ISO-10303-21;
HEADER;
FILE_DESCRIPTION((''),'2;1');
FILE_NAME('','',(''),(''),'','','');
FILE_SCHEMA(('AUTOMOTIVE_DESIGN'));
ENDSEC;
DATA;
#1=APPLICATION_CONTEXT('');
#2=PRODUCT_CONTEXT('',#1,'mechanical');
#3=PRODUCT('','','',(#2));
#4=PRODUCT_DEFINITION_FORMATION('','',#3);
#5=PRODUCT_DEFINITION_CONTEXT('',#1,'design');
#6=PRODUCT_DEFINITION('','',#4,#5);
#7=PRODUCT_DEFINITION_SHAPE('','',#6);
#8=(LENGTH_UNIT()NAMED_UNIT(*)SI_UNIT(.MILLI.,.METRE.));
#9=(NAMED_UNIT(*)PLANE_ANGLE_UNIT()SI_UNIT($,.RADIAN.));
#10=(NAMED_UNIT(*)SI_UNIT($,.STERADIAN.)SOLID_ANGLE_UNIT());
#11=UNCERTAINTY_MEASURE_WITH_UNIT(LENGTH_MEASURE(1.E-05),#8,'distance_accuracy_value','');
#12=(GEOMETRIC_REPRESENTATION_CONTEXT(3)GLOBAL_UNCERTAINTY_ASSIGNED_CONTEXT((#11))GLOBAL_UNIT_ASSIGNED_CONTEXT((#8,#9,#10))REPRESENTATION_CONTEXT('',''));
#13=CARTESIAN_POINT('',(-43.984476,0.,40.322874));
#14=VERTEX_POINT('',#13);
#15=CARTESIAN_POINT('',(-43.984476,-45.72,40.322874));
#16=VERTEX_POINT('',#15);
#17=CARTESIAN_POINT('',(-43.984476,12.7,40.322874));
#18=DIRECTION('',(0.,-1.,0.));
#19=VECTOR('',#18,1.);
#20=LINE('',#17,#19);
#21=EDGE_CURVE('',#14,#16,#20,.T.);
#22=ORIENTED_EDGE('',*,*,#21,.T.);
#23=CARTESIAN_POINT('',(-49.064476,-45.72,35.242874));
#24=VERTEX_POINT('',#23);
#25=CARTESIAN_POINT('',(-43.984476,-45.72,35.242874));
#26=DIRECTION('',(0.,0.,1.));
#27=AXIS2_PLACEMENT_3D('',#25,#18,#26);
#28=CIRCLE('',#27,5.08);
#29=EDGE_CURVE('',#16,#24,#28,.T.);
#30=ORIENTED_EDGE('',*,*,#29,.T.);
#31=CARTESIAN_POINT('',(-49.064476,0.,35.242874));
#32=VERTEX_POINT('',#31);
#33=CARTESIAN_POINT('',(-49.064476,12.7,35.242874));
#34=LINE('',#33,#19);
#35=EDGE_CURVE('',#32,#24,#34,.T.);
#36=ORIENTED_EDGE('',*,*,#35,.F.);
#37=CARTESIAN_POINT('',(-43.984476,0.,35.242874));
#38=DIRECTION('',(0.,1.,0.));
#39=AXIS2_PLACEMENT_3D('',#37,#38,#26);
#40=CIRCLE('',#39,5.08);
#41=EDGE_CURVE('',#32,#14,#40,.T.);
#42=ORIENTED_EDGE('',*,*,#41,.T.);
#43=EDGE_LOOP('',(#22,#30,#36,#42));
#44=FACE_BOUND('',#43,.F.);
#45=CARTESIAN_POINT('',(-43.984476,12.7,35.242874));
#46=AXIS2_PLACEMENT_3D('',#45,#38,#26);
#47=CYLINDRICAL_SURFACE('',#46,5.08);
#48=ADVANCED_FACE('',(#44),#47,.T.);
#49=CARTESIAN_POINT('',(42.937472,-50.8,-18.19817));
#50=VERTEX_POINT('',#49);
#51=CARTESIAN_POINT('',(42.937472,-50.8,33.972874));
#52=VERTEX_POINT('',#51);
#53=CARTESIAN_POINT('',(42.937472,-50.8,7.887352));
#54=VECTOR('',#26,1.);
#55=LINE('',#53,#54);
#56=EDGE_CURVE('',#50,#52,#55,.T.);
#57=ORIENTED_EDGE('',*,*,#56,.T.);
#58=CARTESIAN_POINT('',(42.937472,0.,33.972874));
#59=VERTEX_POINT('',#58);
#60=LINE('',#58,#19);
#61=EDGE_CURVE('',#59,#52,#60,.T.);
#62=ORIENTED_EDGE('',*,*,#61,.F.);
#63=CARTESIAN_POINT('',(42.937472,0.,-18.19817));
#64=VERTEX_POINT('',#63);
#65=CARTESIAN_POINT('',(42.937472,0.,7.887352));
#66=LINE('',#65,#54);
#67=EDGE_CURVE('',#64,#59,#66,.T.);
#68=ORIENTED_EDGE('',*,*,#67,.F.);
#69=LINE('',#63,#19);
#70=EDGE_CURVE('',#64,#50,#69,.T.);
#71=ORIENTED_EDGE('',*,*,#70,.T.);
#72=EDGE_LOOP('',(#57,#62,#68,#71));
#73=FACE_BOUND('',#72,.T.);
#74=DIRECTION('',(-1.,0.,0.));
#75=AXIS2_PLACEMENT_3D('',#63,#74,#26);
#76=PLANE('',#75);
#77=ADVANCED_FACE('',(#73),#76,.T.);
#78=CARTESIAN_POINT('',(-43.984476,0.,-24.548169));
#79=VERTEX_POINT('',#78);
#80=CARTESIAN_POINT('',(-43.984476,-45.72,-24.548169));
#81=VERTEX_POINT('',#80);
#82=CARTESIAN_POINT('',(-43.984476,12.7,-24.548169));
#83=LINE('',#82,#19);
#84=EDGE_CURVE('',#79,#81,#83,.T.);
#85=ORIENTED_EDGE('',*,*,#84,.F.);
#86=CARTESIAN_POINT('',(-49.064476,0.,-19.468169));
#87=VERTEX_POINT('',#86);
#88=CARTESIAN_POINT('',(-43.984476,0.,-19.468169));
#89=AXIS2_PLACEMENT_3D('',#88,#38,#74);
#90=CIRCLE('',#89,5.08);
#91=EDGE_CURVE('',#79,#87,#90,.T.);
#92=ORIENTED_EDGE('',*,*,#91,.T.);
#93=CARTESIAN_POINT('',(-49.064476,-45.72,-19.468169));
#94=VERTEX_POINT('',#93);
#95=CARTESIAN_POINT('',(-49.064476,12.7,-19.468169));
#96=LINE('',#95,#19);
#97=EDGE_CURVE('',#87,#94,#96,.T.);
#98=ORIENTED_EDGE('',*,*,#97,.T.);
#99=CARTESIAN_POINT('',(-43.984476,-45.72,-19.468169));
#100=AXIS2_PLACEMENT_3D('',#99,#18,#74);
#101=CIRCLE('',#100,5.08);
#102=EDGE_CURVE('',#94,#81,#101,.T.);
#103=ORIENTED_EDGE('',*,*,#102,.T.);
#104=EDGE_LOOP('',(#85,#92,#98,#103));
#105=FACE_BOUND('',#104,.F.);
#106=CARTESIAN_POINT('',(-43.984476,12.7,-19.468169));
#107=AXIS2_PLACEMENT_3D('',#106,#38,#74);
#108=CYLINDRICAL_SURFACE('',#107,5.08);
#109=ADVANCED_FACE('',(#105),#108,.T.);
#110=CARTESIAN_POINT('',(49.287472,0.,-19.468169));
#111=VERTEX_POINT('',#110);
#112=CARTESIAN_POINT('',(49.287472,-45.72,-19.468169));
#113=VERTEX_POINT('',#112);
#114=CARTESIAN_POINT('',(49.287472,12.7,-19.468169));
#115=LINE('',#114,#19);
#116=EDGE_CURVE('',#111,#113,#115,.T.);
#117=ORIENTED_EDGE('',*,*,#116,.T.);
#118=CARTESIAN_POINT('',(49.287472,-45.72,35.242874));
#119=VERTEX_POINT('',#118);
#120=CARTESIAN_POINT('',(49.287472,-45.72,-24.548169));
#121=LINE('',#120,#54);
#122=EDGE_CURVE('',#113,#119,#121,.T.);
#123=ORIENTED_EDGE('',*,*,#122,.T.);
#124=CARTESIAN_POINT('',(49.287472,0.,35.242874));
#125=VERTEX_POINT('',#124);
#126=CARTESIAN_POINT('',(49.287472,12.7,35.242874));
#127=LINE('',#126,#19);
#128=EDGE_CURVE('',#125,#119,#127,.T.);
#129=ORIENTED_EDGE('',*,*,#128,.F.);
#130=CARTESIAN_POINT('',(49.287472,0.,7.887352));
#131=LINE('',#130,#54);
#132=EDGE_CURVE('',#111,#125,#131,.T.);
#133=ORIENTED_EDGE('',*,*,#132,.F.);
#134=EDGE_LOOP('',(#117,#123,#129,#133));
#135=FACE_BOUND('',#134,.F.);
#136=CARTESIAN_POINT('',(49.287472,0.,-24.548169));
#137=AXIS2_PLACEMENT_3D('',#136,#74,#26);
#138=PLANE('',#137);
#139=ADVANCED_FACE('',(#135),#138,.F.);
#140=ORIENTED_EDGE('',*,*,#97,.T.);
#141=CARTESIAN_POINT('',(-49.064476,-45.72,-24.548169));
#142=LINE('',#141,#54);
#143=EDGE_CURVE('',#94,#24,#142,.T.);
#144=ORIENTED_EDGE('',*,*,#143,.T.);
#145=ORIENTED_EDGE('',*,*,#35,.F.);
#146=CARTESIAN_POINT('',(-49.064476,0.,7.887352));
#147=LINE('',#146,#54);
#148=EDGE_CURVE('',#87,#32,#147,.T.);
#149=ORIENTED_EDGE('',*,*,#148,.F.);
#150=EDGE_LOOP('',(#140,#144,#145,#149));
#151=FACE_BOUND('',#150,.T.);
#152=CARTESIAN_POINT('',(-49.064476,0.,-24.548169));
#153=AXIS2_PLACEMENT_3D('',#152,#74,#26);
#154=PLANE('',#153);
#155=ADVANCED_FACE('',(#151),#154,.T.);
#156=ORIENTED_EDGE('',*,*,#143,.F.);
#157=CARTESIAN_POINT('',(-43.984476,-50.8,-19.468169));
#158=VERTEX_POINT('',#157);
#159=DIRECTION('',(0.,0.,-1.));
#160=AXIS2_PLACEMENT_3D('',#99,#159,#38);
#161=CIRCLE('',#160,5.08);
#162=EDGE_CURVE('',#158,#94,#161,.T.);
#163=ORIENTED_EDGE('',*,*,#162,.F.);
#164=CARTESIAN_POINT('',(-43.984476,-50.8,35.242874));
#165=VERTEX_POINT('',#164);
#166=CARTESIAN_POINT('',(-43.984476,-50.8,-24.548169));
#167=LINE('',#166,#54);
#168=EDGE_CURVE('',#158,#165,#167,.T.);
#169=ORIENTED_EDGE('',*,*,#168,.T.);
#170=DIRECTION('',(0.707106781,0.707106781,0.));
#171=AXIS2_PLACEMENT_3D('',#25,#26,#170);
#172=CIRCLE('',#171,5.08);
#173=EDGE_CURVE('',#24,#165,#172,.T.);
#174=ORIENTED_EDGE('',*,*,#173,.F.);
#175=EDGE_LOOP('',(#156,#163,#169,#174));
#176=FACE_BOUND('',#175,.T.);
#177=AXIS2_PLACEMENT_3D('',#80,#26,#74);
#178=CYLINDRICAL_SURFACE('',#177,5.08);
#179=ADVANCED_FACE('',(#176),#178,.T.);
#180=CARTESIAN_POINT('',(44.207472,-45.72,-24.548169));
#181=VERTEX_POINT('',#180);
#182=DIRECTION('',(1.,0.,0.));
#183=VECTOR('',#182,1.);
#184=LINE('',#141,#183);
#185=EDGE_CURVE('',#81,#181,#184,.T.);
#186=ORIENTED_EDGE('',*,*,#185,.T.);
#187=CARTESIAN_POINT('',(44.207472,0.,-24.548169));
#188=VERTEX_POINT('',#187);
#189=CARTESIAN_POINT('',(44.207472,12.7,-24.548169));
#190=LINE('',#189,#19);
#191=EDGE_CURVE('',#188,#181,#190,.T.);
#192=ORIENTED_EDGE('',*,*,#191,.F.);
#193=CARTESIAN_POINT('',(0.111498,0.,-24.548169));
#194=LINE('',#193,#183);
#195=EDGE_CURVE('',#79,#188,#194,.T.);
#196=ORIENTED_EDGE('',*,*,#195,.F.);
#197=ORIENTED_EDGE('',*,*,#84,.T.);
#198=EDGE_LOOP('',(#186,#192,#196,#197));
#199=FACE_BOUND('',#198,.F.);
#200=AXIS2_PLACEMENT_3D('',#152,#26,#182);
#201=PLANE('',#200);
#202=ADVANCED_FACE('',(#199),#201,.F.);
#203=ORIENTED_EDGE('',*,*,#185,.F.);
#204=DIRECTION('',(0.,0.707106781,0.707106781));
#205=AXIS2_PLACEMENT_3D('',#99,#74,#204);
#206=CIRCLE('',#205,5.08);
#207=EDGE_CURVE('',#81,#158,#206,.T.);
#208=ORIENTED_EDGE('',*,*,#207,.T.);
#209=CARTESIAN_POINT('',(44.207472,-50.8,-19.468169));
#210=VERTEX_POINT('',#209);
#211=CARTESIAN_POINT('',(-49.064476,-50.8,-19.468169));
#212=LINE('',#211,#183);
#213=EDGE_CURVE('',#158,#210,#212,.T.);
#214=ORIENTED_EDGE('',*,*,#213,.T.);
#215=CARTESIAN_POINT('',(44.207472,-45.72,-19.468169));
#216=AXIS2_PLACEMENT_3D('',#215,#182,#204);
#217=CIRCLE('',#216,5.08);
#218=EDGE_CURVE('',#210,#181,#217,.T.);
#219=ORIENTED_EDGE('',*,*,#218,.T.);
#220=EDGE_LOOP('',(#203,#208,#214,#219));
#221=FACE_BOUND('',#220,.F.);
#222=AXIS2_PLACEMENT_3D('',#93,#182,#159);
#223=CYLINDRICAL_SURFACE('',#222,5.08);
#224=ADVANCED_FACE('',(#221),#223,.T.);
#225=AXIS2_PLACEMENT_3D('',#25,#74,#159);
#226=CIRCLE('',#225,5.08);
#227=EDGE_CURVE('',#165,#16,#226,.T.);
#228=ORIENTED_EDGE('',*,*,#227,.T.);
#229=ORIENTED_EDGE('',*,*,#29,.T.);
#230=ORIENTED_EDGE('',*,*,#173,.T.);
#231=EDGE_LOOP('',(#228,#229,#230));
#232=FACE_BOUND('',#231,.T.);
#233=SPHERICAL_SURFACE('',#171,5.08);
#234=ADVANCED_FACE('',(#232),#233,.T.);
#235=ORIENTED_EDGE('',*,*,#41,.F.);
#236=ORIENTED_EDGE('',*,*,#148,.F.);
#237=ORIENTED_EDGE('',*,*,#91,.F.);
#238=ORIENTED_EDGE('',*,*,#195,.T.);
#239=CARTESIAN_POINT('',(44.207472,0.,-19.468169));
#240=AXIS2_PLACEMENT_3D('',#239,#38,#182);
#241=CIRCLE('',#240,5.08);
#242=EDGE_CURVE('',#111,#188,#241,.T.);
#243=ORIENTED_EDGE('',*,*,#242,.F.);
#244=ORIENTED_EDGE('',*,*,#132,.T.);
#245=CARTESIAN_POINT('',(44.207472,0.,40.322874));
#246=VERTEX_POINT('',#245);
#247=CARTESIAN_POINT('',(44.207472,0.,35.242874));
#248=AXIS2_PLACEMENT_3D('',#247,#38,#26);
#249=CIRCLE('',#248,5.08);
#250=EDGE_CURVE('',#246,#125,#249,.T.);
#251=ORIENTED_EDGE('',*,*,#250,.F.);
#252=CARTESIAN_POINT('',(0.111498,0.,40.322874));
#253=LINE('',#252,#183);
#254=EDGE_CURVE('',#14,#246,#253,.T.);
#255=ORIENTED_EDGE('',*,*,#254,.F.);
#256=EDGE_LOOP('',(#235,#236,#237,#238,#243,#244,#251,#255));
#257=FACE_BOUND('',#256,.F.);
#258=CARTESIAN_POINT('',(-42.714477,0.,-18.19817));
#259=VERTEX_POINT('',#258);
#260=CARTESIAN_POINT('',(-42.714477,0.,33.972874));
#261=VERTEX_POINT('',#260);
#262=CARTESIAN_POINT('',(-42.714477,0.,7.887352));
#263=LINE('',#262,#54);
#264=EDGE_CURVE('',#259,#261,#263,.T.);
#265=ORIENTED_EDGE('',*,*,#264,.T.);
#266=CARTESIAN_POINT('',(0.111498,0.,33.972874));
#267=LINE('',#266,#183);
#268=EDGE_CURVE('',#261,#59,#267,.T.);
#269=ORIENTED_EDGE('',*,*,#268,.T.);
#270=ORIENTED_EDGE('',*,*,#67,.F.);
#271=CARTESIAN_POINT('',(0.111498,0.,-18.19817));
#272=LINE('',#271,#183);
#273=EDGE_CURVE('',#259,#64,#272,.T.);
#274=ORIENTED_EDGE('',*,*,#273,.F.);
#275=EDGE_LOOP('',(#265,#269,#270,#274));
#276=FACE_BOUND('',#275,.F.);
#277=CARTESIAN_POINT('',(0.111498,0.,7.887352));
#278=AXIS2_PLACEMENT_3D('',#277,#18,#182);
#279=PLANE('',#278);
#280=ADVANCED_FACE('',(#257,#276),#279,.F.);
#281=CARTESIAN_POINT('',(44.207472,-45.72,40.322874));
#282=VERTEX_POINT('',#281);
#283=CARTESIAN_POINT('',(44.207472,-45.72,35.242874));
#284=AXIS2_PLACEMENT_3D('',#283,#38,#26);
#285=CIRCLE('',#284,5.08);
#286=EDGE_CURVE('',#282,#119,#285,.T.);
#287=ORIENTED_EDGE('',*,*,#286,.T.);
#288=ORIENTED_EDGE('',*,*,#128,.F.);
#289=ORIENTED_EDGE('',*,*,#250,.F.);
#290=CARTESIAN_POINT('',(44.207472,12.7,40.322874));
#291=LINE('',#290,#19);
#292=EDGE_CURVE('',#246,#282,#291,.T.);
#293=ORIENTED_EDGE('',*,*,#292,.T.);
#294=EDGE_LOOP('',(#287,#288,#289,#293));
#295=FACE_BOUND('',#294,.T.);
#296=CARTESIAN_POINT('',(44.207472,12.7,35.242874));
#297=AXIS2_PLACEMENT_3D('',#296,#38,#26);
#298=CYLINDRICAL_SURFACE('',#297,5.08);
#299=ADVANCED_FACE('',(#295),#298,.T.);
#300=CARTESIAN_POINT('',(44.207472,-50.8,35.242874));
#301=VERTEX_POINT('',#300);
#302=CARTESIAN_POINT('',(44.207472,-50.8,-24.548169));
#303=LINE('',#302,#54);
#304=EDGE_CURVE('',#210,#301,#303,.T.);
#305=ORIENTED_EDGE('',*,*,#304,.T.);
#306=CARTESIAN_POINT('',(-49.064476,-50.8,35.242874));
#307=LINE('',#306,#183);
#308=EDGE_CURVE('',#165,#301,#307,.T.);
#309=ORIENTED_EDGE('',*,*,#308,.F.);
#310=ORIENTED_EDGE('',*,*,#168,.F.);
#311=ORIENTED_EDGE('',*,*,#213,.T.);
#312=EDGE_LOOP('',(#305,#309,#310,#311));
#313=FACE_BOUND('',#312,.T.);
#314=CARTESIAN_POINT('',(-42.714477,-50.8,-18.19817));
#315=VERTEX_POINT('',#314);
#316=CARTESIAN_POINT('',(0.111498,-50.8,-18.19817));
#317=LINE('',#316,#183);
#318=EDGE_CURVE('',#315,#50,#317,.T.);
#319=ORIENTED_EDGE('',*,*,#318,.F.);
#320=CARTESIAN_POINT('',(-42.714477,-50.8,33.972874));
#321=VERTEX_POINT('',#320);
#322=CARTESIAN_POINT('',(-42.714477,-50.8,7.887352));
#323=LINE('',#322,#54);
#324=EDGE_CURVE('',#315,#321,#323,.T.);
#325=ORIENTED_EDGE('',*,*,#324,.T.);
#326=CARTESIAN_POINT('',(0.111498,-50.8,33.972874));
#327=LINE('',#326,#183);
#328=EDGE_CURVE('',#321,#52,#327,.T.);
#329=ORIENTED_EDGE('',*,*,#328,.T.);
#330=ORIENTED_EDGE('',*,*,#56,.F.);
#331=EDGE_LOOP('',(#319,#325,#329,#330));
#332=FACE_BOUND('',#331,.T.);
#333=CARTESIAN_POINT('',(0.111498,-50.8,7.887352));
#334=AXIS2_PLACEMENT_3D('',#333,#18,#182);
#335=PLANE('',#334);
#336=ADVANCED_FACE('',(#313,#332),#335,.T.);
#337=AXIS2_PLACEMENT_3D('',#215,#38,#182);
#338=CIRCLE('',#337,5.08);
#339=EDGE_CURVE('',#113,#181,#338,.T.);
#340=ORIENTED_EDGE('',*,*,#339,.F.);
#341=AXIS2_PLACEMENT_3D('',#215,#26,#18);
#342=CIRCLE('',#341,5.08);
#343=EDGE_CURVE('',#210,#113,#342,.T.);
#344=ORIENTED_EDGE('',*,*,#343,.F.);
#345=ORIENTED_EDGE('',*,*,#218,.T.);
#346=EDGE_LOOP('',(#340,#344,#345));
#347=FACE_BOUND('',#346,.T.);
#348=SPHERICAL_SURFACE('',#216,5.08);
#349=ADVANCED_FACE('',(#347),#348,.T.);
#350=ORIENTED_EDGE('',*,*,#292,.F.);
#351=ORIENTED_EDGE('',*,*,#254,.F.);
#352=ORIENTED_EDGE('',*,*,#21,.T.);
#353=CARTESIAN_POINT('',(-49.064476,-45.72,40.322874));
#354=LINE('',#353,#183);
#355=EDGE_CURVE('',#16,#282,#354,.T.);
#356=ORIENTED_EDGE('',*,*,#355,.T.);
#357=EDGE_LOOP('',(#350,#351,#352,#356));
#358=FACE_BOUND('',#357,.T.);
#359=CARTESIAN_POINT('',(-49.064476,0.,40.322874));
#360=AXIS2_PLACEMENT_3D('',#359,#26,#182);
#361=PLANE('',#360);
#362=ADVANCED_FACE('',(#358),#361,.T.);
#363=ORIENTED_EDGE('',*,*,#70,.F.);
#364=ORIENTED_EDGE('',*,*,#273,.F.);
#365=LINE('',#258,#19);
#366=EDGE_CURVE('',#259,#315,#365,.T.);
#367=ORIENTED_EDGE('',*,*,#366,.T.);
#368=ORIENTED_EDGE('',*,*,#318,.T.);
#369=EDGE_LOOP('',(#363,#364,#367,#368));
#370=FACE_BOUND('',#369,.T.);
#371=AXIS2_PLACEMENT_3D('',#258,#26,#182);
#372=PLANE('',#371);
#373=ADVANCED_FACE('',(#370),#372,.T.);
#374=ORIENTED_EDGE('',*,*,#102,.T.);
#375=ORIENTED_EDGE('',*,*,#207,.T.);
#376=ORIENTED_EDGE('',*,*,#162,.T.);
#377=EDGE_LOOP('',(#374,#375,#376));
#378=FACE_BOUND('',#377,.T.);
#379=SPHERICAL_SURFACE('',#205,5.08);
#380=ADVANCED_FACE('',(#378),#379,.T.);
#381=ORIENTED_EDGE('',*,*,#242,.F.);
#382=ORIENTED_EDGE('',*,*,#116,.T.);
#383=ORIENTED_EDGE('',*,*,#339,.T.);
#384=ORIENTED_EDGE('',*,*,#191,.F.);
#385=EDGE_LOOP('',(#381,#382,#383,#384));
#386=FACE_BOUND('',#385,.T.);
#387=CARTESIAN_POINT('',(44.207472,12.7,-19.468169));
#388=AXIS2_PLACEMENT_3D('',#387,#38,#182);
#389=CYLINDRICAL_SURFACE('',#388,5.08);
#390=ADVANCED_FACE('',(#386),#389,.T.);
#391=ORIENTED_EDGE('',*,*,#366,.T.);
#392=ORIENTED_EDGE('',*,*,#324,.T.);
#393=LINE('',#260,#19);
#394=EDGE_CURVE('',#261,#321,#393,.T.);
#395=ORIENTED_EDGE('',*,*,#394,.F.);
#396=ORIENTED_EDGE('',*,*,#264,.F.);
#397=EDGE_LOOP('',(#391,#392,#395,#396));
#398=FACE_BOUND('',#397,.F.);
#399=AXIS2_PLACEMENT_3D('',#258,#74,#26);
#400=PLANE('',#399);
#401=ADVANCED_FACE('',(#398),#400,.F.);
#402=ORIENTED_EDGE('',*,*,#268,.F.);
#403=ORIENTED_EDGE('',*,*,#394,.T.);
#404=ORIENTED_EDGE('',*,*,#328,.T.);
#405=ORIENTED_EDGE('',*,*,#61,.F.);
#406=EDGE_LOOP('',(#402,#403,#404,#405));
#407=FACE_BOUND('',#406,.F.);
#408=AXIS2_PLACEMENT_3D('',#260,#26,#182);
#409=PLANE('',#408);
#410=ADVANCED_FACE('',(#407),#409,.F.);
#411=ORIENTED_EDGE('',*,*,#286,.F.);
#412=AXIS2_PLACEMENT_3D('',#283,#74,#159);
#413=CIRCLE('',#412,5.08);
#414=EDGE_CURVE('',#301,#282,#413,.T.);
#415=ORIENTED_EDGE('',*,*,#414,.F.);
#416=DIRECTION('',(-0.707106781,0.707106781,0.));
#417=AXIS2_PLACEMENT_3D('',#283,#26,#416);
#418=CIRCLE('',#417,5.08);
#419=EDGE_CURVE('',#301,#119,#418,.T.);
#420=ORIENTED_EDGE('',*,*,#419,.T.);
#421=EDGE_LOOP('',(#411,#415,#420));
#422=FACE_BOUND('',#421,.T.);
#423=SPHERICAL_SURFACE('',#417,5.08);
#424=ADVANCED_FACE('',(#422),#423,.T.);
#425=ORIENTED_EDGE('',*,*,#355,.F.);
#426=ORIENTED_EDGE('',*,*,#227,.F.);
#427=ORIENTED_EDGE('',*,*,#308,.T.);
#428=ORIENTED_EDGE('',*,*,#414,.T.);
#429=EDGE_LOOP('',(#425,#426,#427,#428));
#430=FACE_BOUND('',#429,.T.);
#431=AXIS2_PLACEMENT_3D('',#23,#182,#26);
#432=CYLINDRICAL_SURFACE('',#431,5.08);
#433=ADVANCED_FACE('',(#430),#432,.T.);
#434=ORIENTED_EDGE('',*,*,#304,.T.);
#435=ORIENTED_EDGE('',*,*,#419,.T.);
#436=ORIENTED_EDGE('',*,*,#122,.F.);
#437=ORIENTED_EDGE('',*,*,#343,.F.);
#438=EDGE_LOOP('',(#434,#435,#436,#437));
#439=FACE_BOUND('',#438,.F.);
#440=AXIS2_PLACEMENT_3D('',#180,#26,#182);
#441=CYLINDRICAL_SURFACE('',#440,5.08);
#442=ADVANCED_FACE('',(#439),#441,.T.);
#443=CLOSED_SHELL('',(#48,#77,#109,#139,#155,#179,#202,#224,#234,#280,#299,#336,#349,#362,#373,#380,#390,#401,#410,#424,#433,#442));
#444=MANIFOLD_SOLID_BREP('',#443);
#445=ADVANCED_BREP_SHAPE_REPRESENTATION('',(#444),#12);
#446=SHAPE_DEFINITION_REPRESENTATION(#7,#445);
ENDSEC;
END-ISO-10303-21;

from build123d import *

# Parameters (mm, degrees)
F1_W         = 98.3519479632
F1_H         = 64.8710429668
F1_W_2       = 85.651949048
F1_H_2       = 52.1710440516
F2_DEPTH     = 50.8
F3_R         = 5.08
F4_T1_DEPTH  = 58.42
F4_S5_W      = 5.08
F4_S5_H      = 5.08
F4_T6_DEPTH  = 5.08
F4_S11_W     = 5.08
F4_S11_H     = 5.08
F4_T12_DEPTH = 5.08
F4_S17_W     = 5.08
F4_S17_H     = 5.08
F4_T18_DEPTH = 5.08
F5_T1_DEPTH  = 58.42
F5_S5_W      = 5.08
F5_S5_H      = 5.08
F5_T6_DEPTH  = 5.08


# Not quite as in the source:
# - a fillet or chamfer that OpenCascade refuses, or shapes differently, is made with other operations: its cross-section is extruded or revolved along the edge and cut away or added


with BuildPart() as f2:
    # F1 (on face) → F2 (new body)
    with BuildSketch(Plane.XZ):
        with Locations((0.1114979386, 7.887352258)):
            Rectangle(F1_W, F1_H)
        with Locations((0.1114979386, 7.887352258)):
            Rectangle(F1_W_2, F1_H_2, mode=Mode.SUBTRACT)
    extrude(amount=F2_DEPTH)

    # F3
    f3_edges = [f2.edges().sort_by_distance(p)[0] for p in [
        (0.111498, -50.8, 40.322874),
        (49.287472, -50.8, 7.887352),
        (0.111498, -50.8, -24.548169),
        (-49.064476, -50.8, 7.887352),
    ]]
    fillet(f3_edges, radius=F3_R)

    # F4: fillet of radius 5.08 on 3 edges, made by hand

    # F4_s2 → F4_t1 (cut)
    with BuildSketch(Plane.XZ.offset(-12.7)):
        with BuildLine():
            ThreePointArc((44.2074719203, 40.3228737414), (47.7995743687, 38.8349761898), (49.2874719203, 35.2428737414))
            Line((49.2874719203, 35.2428737414), (49.2874719203, 40.3228737414))
            Line((49.2874719203, 40.3228737414), (44.2074719203, 40.3228737414))
        make_face()
        with BuildLine():
            ThreePointArc((49.2874719203, -19.4681692255), (47.7995743687, -23.0602716739), (44.2074719203, -24.5481692255))
            Line((44.2074719203, -24.5481692255), (49.2874719203, -24.5481692255))
            Line((49.2874719203, -24.5481692255), (49.2874719203, -19.4681692255))
        make_face()
        with BuildLine():
            ThreePointArc((-49.064476043, -19.4681692255), (-47.5765784914, -23.0602716739), (-43.984476043, -24.5481692255))
            Line((-43.984476043, -24.5481692255), (-49.064476043, -24.5481692255))
            Line((-49.064476043, -24.5481692255), (-49.064476043, -19.4681692255))
        make_face()
    extrude(amount=F4_T1_DEPTH, mode=Mode.SUBTRACT)


with BuildPart() as f4_tool4:
    # F4_s5 → F4_t6 (new body)
    with BuildSketch(Plane.YZ.offset(-43.984476043)):
        with Locations((-48.26, -22.0081692255)):
            Rectangle(F4_S5_W, F4_S5_H)
    extrude(amount=-F4_T6_DEPTH)

    # F4_s7 → F4_t8 (revolve, cut)
    with BuildSketch(Plane(origin=(-43.984476043, -45.72, -19.4681692255), x_dir=(0, 0.7071067812, 0.7071067812), z_dir=(0, -0.7071067812, 0.7071067812))):
        with BuildLine():
            ThreePointArc((0, -5.08), (5.08, 0), (0, 5.08))
            Line((0, 5.08), (0, -5.08))
        make_face()
    revolve(axis=Axis((-43.984476043, -45.72, -19.4681692255), (-1, 0, 0)), mode=Mode.SUBTRACT)


with BuildPart() as f2_1:
    add(f2.part)

    # F4_t3: cut F4_tool4
    add(f4_tool4.part, mode=Mode.SUBTRACT)


with BuildPart() as f4_tool10:
    # F4_s11 → F4_t12 (new body)
    with BuildSketch(Plane.YZ.offset(44.2074719203)):
        with Locations((-48.26, -22.0081692255)):
            Rectangle(F4_S11_W, F4_S11_H)
    extrude(amount=F4_T12_DEPTH)

    # F4_s13 → F4_t14 (revolve, cut)
    with BuildSketch(Plane(origin=(44.2074719203, -45.72, -19.4681692255), x_dir=(0, 0.7071067812, 0.7071067812), z_dir=(0, 0.7071067812, -0.7071067812))):
        with BuildLine():
            ThreePointArc((0, -5.08), (5.08, 0), (0, 5.08))
            Line((0, 5.08), (0, -5.08))
        make_face()
    revolve(axis=Axis((44.2074719203, -45.72, -19.4681692255), (1, 0, 0)), mode=Mode.SUBTRACT)


with BuildPart() as f2_2:
    add(f2_1.part)

    # F4_t9: cut F4_tool10
    add(f4_tool10.part, mode=Mode.SUBTRACT)


with BuildPart() as f4_tool16:
    # F4_s17 → F4_t18 (new body)
    with BuildSketch(Plane.XY.offset(35.2428737414)):
        with Locations((46.7474719203, -48.26)):
            Rectangle(F4_S17_W, F4_S17_H)
    extrude(amount=F4_T18_DEPTH)

    # F4_s19 → F4_t20 (revolve, cut)
    with BuildSketch(Plane(origin=(44.2074719203, -45.72, 35.2428737414), x_dir=(-0.7071067812, 0.7071067812, 0), z_dir=(0.7071067812, 0.7071067812, 0))):
        with BuildLine():
            ThreePointArc((0, -5.08), (5.08, 0), (0, 5.08))
            Line((0, 5.08), (0, -5.08))
        make_face()
    revolve(axis=Axis((44.2074719203, -45.72, 35.2428737414), (0, 0, 1)), mode=Mode.SUBTRACT)


with BuildPart() as f2_3:
    add(f2_2.part)

    # F4_t15: cut F4_tool16
    add(f4_tool16.part, mode=Mode.SUBTRACT)

    # F5: fillet of radius 5.08 on 1 edges, made by hand

    # F5_s2 → F5_t1 (cut)
    with BuildSketch(Plane.XZ.offset(-12.7)):
        with BuildLine():
            ThreePointArc((-43.984476043, 40.3228737414), (-47.5765784914, 38.8349761898), (-49.064476043, 35.2428737414))
            Line((-49.064476043, 35.2428737414), (-49.064476043, 40.3228737414))
            Line((-49.064476043, 40.3228737414), (-43.984476043, 40.3228737414))
        make_face()
    extrude(amount=F5_T1_DEPTH, mode=Mode.SUBTRACT)


with BuildPart() as f5_tool4:
    # F5_s5 → F5_t6 (new body)
    with BuildSketch(Plane.XY.offset(35.2428737414)):
        with Locations((-46.524476043, -48.26)):
            Rectangle(F5_S5_W, F5_S5_H)
    extrude(amount=F5_T6_DEPTH)

    # F5_s7 → F5_t8 (revolve, cut)
    with BuildSketch(Plane(origin=(-43.984476043, -45.72, 35.2428737414), x_dir=(0.7071067812, 0.7071067812, 0), z_dir=(0.7071067812, -0.7071067812, 0))):
        with BuildLine():
            ThreePointArc((0, -5.08), (5.08, 0), (0, 5.08))
            Line((0, 5.08), (0, -5.08))
        make_face()
    revolve(axis=Axis((-43.984476043, -45.72, 35.2428737414), (0, 0, 1)), mode=Mode.SUBTRACT)


with BuildPart() as f2_4:
    add(f2_3.part)

    # F5_t3: cut F5_tool4
    add(f5_tool4.part, mode=Mode.SUBTRACT)


solid = f2_4.part
